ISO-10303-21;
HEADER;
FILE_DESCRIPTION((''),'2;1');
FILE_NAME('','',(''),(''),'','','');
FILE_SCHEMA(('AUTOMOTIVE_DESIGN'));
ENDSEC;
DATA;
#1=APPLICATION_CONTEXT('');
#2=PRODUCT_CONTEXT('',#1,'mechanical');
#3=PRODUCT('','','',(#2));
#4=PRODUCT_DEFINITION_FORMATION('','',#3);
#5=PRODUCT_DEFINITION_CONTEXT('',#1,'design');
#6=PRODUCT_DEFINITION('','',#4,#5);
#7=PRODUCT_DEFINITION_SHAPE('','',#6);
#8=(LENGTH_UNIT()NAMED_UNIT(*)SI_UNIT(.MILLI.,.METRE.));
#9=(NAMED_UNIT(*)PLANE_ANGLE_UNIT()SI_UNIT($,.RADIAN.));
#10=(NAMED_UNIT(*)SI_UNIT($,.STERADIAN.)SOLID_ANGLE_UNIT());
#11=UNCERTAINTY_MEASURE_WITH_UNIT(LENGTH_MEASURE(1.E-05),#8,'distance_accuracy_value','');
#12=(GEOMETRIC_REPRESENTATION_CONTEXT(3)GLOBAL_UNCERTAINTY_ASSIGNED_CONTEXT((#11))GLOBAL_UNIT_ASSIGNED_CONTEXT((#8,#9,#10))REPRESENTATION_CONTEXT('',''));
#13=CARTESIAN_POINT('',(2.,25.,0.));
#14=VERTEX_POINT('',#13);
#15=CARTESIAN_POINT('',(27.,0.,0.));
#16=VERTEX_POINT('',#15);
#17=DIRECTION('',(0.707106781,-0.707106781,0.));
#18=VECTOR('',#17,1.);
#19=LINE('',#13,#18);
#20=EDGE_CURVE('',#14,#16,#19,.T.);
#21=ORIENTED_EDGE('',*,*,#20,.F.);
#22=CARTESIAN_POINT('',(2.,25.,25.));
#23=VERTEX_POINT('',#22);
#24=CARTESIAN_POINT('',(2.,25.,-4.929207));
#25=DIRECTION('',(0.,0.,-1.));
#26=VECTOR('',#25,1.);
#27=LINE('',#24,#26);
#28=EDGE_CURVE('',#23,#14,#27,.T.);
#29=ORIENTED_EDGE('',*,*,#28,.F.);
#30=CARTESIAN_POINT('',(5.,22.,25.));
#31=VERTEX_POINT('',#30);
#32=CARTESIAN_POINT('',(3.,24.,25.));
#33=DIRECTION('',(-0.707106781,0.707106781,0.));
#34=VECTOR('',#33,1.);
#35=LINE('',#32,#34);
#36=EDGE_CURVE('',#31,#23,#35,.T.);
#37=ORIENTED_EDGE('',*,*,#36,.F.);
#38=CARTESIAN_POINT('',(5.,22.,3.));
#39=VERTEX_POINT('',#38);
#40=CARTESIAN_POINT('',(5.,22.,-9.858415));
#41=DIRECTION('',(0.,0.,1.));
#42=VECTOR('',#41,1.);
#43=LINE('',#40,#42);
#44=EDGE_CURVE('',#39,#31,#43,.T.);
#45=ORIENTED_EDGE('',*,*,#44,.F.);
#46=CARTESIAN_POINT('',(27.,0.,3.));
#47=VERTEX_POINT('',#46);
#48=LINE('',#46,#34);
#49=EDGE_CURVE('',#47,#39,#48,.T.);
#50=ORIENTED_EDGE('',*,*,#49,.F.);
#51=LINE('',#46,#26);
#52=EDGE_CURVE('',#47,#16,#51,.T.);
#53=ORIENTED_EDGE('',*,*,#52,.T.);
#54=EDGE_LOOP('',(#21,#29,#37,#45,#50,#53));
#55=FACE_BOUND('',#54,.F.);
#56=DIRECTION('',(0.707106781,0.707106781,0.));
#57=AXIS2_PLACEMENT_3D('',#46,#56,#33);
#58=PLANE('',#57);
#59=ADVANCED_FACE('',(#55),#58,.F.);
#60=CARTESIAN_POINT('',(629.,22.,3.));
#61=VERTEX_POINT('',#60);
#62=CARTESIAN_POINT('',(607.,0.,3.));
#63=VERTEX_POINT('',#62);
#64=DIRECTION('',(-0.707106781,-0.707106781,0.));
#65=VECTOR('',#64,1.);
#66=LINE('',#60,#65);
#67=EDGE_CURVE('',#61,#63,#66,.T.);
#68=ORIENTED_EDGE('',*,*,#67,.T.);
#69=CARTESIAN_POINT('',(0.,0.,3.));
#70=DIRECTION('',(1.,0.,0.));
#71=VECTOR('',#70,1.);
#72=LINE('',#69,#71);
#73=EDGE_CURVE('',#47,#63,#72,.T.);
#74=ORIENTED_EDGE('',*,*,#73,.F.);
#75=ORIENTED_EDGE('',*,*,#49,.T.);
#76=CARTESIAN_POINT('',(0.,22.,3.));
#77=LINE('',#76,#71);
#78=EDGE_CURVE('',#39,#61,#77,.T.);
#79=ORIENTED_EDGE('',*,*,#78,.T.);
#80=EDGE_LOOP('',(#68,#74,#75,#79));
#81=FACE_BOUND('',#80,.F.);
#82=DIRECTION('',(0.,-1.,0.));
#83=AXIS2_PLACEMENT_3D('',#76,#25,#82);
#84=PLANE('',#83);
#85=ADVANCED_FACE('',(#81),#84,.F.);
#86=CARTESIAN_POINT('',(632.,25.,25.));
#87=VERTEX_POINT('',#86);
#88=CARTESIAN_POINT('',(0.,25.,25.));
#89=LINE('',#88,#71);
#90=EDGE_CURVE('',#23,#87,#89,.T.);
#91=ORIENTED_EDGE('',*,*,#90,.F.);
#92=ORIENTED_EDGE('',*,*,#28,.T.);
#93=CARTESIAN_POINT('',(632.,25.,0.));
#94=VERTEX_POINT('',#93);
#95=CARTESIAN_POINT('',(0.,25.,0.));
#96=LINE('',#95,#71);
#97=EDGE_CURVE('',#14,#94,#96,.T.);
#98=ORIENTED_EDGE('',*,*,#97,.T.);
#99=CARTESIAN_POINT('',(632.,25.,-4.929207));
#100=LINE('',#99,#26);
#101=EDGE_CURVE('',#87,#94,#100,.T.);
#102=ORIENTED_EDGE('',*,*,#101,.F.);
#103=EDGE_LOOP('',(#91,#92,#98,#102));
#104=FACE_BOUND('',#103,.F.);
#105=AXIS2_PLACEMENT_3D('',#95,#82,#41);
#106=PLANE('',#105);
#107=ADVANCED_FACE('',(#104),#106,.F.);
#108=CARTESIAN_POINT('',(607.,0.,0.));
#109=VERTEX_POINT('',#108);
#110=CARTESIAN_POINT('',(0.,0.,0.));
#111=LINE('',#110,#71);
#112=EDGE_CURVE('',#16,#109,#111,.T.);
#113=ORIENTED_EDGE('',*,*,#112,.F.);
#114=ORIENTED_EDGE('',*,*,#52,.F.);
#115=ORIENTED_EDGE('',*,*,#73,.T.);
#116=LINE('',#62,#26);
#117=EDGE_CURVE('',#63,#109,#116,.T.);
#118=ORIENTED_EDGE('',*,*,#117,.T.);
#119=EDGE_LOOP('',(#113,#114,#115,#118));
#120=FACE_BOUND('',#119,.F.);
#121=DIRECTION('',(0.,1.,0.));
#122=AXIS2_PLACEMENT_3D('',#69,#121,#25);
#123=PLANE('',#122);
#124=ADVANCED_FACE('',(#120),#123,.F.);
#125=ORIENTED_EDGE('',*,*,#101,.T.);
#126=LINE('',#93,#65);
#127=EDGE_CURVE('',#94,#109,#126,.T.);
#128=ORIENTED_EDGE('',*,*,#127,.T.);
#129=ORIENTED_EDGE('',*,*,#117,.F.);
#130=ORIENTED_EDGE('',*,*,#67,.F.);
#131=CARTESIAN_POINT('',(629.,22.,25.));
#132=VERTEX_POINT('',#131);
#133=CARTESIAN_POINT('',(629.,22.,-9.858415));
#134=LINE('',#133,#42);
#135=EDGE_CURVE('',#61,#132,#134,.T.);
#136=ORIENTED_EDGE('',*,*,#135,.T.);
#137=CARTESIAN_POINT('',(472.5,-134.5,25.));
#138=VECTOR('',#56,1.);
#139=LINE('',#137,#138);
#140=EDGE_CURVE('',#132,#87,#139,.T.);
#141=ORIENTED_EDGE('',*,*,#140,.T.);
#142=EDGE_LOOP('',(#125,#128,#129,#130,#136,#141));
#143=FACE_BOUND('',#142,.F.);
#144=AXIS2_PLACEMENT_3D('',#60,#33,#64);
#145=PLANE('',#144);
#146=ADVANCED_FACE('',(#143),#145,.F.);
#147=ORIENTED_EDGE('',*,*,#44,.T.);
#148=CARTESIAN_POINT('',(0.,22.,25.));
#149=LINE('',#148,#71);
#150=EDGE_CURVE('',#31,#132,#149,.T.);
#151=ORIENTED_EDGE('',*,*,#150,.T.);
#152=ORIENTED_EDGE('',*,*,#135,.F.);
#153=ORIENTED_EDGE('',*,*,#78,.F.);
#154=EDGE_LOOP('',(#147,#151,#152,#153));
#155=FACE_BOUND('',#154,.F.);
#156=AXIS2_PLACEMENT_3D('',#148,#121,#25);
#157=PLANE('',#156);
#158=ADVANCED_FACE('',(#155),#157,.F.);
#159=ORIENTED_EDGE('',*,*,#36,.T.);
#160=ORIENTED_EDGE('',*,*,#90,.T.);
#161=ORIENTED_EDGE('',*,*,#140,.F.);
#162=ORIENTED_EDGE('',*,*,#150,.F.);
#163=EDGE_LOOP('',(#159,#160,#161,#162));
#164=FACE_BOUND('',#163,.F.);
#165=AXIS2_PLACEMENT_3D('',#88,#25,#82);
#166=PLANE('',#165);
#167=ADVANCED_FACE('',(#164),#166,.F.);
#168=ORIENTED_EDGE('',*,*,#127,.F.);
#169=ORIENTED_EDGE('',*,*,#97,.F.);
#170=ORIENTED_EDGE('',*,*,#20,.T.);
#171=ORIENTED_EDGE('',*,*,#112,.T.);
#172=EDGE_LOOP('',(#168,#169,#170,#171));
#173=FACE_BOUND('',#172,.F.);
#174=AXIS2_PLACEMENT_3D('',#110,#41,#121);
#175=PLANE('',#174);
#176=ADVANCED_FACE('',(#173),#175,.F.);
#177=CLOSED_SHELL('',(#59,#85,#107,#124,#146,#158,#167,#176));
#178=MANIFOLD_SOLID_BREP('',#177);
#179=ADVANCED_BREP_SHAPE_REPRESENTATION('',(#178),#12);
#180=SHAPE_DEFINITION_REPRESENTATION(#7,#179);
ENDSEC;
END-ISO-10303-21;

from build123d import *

# Parameters (mm, degrees)
F1_DEPTH    = 634
F2_T1_DEPTH = 47.7168298797
F4_DEPTH    = 25


# Not quite as in the source:
# - a fillet or chamfer that OpenCascade refuses, or shapes differently, is made with other operations: its cross-section is extruded or revolved along the edge and cut away or added


with BuildPart() as f1:
    # F0 (on Right) → F1 (new body)
    with BuildSketch(Plane.YZ):
        Polygon((0, 3), (0, 0), (25, 0), (25, 25), (22, 25), (22, 3), align=None)
    extrude(amount=F1_DEPTH)

    # F2: chamfer of 5 on 2 edges, made by hand

    # F2_s2 → F2_t1 (cut)
    with BuildSketch(Plane.XY.offset(-9.8584149398)):
        Polygon((629, 22), (634, 27), (634, 22), align=None)
        Polygon((5, 22), (0, 27), (0, 22), align=None)
    extrude(amount=F2_T1_DEPTH, mode=Mode.SUBTRACT)

    # F3 (on face) → F4 (cut)
    with BuildSketch(Plane.XY.offset(3)):
        Polygon((634, 22), (629, 22), (607, 0), (634, 0), align=None)
        Polygon((27, 0), (5, 22), (0, 22), (0, 0), align=None)
    extrude(amount=-F4_DEPTH, mode=Mode.SUBTRACT)


solid = f1.part
